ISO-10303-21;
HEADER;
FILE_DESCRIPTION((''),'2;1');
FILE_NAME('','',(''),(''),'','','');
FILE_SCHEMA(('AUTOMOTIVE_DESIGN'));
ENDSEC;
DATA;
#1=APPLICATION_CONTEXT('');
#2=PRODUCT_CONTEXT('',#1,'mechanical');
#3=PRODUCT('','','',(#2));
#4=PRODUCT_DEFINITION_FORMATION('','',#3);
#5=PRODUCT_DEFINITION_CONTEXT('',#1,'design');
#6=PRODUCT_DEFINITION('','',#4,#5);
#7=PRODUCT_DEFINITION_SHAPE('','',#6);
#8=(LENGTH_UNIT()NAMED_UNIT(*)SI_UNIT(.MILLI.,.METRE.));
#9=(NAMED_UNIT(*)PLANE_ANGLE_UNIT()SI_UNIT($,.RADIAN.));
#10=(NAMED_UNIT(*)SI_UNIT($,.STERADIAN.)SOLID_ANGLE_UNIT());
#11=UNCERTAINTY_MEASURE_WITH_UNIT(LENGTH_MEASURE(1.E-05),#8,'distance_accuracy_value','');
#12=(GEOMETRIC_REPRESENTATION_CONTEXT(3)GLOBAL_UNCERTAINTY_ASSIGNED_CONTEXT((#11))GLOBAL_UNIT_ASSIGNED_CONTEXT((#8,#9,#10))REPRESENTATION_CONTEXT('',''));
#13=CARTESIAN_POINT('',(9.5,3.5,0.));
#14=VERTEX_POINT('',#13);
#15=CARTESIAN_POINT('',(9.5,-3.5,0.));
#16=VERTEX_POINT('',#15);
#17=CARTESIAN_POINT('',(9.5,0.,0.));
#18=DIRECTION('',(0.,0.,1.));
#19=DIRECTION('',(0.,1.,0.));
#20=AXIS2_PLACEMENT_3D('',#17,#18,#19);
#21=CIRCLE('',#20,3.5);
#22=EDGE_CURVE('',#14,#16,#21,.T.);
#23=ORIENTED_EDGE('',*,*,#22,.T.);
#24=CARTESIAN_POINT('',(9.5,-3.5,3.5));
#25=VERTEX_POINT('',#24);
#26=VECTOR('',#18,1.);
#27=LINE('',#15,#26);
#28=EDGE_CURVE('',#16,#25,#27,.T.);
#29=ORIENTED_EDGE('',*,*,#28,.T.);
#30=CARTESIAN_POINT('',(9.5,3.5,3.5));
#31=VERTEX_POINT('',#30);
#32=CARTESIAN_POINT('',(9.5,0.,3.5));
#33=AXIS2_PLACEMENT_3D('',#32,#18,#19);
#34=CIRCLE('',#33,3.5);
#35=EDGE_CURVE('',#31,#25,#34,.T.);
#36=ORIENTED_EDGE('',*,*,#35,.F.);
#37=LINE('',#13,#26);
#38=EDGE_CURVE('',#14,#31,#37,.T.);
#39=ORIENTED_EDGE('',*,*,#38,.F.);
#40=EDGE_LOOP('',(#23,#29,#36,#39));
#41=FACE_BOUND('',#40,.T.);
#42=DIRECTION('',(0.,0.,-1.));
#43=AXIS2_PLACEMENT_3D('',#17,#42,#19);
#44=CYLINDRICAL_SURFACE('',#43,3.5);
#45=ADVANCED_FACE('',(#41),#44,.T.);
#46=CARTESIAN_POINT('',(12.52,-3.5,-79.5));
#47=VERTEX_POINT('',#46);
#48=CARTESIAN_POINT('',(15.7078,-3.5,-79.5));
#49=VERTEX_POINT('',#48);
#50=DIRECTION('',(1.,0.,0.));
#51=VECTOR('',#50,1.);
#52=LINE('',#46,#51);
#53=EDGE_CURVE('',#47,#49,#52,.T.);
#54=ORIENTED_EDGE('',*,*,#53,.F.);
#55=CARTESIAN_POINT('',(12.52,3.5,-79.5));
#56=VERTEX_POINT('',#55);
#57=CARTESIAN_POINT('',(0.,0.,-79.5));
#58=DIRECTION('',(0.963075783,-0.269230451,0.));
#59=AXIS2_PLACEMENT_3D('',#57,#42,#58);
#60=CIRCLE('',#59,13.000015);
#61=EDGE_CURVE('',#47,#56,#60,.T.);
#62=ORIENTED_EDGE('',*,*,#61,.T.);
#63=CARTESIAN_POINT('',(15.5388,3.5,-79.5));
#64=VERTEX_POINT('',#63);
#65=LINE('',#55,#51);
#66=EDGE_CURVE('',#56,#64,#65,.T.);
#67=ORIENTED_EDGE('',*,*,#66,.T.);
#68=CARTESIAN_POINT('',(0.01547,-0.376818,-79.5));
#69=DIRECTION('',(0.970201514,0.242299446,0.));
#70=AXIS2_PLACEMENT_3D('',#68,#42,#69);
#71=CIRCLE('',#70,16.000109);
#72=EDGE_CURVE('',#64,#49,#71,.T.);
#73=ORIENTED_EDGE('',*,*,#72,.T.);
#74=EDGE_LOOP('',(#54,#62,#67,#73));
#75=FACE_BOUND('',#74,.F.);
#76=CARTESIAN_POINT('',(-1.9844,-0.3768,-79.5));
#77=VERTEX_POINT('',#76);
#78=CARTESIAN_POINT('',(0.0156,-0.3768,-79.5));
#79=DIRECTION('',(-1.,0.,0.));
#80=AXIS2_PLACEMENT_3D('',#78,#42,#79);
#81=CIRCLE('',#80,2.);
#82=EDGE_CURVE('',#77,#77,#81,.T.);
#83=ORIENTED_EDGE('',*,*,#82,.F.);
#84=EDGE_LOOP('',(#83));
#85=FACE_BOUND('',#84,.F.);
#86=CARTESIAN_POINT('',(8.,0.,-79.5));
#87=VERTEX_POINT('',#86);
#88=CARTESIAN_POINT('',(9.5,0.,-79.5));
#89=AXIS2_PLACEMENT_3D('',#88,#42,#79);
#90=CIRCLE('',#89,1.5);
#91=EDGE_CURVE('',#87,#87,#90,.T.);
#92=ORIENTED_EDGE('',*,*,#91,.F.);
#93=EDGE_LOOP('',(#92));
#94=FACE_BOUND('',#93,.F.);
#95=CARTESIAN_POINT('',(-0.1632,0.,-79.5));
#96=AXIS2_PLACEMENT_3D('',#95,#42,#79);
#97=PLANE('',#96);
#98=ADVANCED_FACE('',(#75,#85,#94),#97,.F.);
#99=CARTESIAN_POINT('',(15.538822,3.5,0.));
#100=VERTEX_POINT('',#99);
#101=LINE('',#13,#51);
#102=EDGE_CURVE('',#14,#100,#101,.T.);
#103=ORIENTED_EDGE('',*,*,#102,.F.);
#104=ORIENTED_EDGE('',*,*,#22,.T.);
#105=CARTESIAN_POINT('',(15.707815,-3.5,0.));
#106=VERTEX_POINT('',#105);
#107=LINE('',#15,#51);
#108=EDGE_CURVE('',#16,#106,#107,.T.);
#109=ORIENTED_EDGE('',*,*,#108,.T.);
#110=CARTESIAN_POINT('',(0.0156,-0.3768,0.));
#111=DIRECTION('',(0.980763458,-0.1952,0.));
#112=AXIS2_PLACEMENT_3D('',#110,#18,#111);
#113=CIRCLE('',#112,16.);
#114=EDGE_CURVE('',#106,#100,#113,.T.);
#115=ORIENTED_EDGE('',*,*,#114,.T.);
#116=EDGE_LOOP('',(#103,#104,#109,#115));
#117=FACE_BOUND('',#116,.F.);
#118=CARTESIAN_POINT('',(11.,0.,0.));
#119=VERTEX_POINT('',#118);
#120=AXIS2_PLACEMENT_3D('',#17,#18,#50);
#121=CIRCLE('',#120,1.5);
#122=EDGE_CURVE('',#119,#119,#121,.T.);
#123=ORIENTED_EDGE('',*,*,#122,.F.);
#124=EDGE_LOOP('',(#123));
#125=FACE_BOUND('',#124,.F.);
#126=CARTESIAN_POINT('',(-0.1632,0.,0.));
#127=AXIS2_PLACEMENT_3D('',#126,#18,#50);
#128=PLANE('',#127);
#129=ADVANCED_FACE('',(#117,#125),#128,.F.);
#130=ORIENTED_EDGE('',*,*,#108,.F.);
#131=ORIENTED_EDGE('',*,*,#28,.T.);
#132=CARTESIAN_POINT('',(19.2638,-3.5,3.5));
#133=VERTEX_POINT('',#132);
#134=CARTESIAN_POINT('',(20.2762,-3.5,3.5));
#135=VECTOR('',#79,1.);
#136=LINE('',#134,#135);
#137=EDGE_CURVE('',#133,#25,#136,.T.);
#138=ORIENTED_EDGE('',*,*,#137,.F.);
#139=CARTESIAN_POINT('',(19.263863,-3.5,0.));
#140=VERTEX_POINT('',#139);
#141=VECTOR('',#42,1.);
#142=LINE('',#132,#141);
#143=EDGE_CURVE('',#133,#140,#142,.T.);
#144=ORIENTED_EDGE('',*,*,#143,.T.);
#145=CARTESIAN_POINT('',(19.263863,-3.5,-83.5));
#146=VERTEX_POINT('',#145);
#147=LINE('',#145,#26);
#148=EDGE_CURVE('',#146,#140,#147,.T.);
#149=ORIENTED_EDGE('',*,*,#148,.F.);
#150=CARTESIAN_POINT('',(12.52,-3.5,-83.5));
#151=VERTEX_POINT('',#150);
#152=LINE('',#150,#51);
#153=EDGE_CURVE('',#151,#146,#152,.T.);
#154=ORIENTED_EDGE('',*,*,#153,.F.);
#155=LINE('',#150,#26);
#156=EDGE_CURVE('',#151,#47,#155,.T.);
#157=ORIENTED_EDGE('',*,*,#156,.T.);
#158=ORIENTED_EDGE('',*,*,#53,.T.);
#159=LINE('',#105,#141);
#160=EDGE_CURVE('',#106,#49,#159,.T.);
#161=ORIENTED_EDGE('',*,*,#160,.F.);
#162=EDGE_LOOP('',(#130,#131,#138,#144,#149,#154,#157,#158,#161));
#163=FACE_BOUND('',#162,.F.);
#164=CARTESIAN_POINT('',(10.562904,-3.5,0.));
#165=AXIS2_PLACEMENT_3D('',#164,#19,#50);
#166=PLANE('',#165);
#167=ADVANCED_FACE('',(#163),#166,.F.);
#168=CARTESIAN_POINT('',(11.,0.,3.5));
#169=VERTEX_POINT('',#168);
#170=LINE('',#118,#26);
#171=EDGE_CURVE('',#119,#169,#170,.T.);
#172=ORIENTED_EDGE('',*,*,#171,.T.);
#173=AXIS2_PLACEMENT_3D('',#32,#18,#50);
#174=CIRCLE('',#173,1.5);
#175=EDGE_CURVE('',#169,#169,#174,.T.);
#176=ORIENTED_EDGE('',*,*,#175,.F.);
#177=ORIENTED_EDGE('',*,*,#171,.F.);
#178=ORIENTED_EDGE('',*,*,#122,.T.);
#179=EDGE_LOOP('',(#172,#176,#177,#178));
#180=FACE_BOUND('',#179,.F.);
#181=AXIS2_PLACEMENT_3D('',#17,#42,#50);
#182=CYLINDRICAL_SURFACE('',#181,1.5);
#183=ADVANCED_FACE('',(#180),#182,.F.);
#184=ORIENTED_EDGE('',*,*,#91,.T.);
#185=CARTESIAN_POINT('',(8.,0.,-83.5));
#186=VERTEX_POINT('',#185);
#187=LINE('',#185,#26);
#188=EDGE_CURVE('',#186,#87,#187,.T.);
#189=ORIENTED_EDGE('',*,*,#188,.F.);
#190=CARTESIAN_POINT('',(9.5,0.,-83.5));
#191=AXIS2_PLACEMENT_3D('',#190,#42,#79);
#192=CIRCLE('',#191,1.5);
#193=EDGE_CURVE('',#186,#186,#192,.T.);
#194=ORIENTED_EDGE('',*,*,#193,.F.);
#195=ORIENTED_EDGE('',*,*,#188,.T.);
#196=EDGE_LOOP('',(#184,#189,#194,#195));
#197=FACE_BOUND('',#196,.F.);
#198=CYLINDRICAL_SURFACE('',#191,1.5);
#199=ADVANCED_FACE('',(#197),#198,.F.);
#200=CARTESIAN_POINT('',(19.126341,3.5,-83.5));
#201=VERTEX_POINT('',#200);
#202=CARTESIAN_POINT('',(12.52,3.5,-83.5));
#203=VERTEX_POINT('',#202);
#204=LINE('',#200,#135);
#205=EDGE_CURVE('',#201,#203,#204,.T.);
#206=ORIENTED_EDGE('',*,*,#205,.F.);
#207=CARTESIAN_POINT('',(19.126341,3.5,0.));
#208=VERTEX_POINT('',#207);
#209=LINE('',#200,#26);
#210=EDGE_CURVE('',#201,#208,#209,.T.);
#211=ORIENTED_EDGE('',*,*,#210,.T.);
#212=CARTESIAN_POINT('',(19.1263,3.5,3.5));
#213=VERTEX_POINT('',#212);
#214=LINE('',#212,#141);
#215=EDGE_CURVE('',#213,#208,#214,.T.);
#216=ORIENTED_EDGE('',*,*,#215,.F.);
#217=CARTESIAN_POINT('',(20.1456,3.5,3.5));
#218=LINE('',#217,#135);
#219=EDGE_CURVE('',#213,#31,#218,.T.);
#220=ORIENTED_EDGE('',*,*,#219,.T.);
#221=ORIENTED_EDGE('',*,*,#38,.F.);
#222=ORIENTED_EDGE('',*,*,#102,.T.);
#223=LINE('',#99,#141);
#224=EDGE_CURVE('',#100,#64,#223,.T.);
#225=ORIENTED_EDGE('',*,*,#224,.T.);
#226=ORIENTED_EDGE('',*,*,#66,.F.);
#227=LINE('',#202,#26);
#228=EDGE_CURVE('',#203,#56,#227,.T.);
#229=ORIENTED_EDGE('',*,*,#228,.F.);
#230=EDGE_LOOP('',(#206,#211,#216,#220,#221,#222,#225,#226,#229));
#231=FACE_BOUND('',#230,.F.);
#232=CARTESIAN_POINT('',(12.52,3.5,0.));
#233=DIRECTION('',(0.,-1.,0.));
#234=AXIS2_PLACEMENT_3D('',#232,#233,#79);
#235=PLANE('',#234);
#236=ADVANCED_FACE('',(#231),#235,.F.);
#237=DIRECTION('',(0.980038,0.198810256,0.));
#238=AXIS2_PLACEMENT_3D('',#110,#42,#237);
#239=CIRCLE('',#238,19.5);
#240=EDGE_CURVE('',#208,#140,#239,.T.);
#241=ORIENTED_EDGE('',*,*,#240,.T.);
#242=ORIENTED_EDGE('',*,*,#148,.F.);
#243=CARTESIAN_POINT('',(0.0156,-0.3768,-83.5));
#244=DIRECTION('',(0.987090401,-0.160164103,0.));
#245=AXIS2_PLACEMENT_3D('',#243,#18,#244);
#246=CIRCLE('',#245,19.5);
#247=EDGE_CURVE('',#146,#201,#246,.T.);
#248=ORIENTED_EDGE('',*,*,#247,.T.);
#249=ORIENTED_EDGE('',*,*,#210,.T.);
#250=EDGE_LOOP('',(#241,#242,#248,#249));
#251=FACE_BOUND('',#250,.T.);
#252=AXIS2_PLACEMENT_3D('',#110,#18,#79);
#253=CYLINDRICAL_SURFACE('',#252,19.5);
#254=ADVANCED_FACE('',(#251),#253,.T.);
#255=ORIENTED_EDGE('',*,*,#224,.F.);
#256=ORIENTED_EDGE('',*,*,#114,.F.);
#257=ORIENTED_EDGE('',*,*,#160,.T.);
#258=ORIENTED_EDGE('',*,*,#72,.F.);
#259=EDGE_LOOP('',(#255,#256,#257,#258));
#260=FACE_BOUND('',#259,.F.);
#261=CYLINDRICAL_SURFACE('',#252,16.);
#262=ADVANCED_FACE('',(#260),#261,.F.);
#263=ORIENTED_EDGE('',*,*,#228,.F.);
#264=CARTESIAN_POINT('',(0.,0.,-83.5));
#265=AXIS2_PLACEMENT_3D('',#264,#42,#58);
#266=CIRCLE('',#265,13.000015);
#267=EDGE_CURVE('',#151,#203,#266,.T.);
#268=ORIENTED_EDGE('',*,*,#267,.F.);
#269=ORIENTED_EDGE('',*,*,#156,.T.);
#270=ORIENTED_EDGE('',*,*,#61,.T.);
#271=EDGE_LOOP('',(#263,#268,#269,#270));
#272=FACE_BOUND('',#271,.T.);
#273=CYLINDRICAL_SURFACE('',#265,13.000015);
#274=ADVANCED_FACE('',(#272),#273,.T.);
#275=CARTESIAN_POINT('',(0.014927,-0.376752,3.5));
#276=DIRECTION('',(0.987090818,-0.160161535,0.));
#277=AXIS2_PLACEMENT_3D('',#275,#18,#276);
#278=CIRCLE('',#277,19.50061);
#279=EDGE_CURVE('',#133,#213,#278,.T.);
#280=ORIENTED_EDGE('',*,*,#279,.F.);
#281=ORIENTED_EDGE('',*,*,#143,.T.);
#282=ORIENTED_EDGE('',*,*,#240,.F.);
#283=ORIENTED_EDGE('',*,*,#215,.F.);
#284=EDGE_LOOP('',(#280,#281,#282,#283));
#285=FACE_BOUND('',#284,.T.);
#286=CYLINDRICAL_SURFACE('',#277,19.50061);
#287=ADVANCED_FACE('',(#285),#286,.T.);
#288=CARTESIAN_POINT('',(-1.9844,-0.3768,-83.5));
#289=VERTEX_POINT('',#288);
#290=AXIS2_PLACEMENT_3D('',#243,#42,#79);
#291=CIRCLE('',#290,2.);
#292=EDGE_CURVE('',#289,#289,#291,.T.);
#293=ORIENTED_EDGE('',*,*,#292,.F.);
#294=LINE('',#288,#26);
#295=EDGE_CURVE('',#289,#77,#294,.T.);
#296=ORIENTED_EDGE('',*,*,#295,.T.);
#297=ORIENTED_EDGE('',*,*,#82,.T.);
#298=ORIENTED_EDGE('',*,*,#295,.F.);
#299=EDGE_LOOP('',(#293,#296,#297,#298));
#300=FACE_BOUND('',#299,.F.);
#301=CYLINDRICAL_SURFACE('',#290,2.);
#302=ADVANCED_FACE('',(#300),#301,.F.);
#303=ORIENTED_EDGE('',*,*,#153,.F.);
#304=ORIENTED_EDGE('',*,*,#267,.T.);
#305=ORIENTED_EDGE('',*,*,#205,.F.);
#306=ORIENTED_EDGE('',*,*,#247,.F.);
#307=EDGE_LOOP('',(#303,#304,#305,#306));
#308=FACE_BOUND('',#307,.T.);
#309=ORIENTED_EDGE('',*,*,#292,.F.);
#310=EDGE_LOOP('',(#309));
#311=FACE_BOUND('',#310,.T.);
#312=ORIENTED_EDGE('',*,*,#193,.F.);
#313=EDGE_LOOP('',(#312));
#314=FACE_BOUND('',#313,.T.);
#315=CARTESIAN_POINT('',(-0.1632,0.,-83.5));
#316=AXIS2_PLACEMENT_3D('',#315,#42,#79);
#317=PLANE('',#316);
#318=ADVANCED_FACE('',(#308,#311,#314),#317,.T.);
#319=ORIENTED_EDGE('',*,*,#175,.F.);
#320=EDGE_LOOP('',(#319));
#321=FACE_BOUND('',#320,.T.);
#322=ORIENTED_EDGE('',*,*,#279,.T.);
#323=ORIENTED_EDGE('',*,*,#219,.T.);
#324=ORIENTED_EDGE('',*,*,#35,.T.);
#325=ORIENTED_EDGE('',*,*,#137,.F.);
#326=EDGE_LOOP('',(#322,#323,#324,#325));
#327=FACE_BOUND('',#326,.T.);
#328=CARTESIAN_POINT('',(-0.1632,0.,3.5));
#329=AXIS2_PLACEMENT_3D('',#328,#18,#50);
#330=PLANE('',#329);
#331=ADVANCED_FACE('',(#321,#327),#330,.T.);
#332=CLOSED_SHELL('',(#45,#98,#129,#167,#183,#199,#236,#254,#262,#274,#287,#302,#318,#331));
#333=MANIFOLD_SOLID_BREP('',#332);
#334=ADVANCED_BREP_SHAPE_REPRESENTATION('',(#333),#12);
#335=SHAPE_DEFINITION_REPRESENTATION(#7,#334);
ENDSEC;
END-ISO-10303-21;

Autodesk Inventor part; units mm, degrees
ref_plane "YZ Plane" through (0, 0, 0) normal (1, 0, 0) x (0, 1, 0)
ref_plane "XZ Plane" through (0, 0, 0) normal (0, 1, 0) x (-1, 0, 0)
ref_plane "Work Plane1" through (-0.1632, 0, 0) normal (0, 0, 1) x (1, 0, 0)
sketch "Sketch1" plane through (-0.1632, 0, 0) normal (0, 0, 1) x (1, 0, 0)
  circle A0 centre (9.6632, 0) radius 1.5 projected
  line L0 (12.6832, 3.5) -> (9.6632, 3.5) projected
  arc A1 (9.6632, 3.5) -> (9.6632, -3.5) centre (9.6632, 0) ccw projected
  line L1 (9.6632, -3.5) -> (12.6832, -3.5) projected
  arc A2 (12.6832, -3.5) -> (12.6832, 3.5) centre (0.1632, 0) ccw projected
  circle A3 centre (0.1788, -0.3768) radius 14 projected
  circle A4 centre (0.1788, -0.3768) radius 11 projected
  line L2 (12.6832, -3.5) -> (18.2293, -3.5)
  line L3 (12.6832, 3.5) -> (18.7282, 3.5)
  circle A5 centre (0.1788, -0.3768) radius 16.5
  line L4 (16.6788, -0.3768) -> (20.6788, -0.3768)
  circle A6 centre (0.1788, -0.3768) radius 20.5
  line L5 (18.7282, 3.5) -> (20.3088, 3.5)
  line L6 (18.2293, -3.5) -> (20.4394, -3.5)
  point P0 (0.1632, 0)
  dimension "d0" = 33
  dimension "d1" = 4
extrude "Extrusion1" add sketch "Sketch1" along normal blind 3.5 contours A2 L1 A4 L0 | L3 A3 L2 A2 | A4 L1 A1 L0 | L3 A5 L2 A3 | L3 L5 A6 L4 A5 | A5 L4 A6 L6 L2 picked at (10.1281, -2.4909) picked at (14.5943, 3.0756)
sketch "Sketch2" plane through (-0.1632, 0, 0) normal (0, 0, -1) x (-1, 0, 0)
  line L0 (-9.6632, -3.5) -> (-20.4394, -3.5) projected
  arc A0 (-9.6632, -3.5) -> (-9.6632, 3.5) centre (-9.6632, 0) ccw projected
  line L1 (-20.3088, 3.5) -> (-9.6632, 3.5) projected
  arc A1 (-20.3088, 3.5) -> (-20.4394, -3.5) centre (-0.1788, -0.3768) ccw projected
  circle A2 centre (-9.6632, 0) radius 1.5 projected
  circle A3 centre (-0.1788, -0.3768) radius 14 projected
  line L2 (-14.1788, -0.3768) -> (-16.1788, -0.3768)
  circle A4 centre (-0.1788, -0.3768) radius 16
  line L3 (-16.1788, -0.3768) -> (-19.6788, -0.3768)
  circle A5 centre (-0.1788, -0.3768) radius 19.5
  circle A6 centre (-0.1788, -0.3768) radius 2 projected
  point P0 (-0.1632, 0)
  point P1 (-19.427, -3.5)
  point P2 (-15.871, -3.5)
  point P3 (-15.702, 3.5)
  point P4 (-19.2895, 3.5)
  dimension "d4" = 2
  dimension "d5" = 3.5
ref_plane "Work Plane2" through (-13.9845, -14.3768, -78) normal (0, 0, -1) x (0, 1, 0)
extrude "Extrusion2" add sketch "Sketch2" along normal blind 83.5 contours L0 A5 L3 A4 | L3 A5 L1 A4
sketch "Sketch3" plane through (-0.1632, 0, -83.5) normal (0, 0, -1) x (-1, 0, 0)
  circle A0 centre (-0.1788, -0.3768) radius 14 projected
  circle A1 centre (-9.6632, 0) radius 1.5 projected
  arc A2 (-15.702, 3.5) -> (-15.871, -3.5) centre (-0.1788, -0.3768) ccw projected
  line L0 (-9.6632, -3.5) -> (-15.871, -3.5) projected
  arc A3 (-9.6632, -3.5) -> (-9.6632, 3.5) centre (-9.6632, 0) ccw projected
  line L1 (-15.702, 3.5) -> (-9.6632, 3.5) projected
  circle A4 centre (-0.1788, -0.3768) radius 2
  arc A5 (-9.6632, -3.5) -> (-9.6632, 3.5) centre (-9.6632, 0) ccw projected
  line L2 (-9.6632, 3.5) -> (-12.6832, 3.5) projected
  arc A6 (-12.6832, -3.5) -> (-12.6832, 3.5) centre (-0.1632, 0) ccw projected
  line L3 (-12.6832, -3.5) -> (-9.6632, -3.5) projected
  line L4 (3.8368, -5) -> (-4.1632, -5) projected
  line L5 (3.8368, 5) -> (3.8368, -5) projected
  line L6 (-4.1632, 5) -> (3.8368, 5) projected
  line L7 (-4.1632, -5) -> (-4.1632, 5) projected
  point P0 (-0.1632, 0)
  dimension "d8" = 4
extrude "Extrusion3" add sketch "Sketch3" against normal blind 4 contours L1 A3 L0 A0 | A0 L0 A2 L1 | A6 L0 A3 L1 | L4 L7 L6 L5
sketch "Sketch4" plane through (-0.1632, 0, 3.5) normal (0, 0, 1) x (1, 0, 0)
  arc A0 (19.427, -3.5) -> (19.2895, 3.5) centre (0.1788, -0.3768) ccw projected
  arc A1 (19.427, -3.5) -> (19.2895, 3.5) centre (0.1788, -0.3768) ccw projected
  arc A2 (15.871, -3.5) -> (15.702, 3.5) centre (0.1788, -0.3768) ccw projected
  line L0 (9.6632, -3.5) -> (20.4394, -3.5) projected
  arc A3 (20.4394, -3.5) -> (20.3088, 3.5) centre (0.1788, -0.3768) ccw projected
  line L1 (20.3088, 3.5) -> (9.6632, 3.5) projected
  arc A4 (9.6632, 3.5) -> (9.6632, -3.5) centre (9.6632, 0) ccw projected
  circle A5 centre (9.6632, 0) radius 1.5 projected
  point P0 (0.1632, 0)
  point P1 (19.2895, 3.5)
  point P2 (19.427, -3.5)
extrude "Extrusion4" cut sketch "Sketch4" against normal blind 4 contours A0 L1 A3 L0
properties material "PC/ABS Plastic"
